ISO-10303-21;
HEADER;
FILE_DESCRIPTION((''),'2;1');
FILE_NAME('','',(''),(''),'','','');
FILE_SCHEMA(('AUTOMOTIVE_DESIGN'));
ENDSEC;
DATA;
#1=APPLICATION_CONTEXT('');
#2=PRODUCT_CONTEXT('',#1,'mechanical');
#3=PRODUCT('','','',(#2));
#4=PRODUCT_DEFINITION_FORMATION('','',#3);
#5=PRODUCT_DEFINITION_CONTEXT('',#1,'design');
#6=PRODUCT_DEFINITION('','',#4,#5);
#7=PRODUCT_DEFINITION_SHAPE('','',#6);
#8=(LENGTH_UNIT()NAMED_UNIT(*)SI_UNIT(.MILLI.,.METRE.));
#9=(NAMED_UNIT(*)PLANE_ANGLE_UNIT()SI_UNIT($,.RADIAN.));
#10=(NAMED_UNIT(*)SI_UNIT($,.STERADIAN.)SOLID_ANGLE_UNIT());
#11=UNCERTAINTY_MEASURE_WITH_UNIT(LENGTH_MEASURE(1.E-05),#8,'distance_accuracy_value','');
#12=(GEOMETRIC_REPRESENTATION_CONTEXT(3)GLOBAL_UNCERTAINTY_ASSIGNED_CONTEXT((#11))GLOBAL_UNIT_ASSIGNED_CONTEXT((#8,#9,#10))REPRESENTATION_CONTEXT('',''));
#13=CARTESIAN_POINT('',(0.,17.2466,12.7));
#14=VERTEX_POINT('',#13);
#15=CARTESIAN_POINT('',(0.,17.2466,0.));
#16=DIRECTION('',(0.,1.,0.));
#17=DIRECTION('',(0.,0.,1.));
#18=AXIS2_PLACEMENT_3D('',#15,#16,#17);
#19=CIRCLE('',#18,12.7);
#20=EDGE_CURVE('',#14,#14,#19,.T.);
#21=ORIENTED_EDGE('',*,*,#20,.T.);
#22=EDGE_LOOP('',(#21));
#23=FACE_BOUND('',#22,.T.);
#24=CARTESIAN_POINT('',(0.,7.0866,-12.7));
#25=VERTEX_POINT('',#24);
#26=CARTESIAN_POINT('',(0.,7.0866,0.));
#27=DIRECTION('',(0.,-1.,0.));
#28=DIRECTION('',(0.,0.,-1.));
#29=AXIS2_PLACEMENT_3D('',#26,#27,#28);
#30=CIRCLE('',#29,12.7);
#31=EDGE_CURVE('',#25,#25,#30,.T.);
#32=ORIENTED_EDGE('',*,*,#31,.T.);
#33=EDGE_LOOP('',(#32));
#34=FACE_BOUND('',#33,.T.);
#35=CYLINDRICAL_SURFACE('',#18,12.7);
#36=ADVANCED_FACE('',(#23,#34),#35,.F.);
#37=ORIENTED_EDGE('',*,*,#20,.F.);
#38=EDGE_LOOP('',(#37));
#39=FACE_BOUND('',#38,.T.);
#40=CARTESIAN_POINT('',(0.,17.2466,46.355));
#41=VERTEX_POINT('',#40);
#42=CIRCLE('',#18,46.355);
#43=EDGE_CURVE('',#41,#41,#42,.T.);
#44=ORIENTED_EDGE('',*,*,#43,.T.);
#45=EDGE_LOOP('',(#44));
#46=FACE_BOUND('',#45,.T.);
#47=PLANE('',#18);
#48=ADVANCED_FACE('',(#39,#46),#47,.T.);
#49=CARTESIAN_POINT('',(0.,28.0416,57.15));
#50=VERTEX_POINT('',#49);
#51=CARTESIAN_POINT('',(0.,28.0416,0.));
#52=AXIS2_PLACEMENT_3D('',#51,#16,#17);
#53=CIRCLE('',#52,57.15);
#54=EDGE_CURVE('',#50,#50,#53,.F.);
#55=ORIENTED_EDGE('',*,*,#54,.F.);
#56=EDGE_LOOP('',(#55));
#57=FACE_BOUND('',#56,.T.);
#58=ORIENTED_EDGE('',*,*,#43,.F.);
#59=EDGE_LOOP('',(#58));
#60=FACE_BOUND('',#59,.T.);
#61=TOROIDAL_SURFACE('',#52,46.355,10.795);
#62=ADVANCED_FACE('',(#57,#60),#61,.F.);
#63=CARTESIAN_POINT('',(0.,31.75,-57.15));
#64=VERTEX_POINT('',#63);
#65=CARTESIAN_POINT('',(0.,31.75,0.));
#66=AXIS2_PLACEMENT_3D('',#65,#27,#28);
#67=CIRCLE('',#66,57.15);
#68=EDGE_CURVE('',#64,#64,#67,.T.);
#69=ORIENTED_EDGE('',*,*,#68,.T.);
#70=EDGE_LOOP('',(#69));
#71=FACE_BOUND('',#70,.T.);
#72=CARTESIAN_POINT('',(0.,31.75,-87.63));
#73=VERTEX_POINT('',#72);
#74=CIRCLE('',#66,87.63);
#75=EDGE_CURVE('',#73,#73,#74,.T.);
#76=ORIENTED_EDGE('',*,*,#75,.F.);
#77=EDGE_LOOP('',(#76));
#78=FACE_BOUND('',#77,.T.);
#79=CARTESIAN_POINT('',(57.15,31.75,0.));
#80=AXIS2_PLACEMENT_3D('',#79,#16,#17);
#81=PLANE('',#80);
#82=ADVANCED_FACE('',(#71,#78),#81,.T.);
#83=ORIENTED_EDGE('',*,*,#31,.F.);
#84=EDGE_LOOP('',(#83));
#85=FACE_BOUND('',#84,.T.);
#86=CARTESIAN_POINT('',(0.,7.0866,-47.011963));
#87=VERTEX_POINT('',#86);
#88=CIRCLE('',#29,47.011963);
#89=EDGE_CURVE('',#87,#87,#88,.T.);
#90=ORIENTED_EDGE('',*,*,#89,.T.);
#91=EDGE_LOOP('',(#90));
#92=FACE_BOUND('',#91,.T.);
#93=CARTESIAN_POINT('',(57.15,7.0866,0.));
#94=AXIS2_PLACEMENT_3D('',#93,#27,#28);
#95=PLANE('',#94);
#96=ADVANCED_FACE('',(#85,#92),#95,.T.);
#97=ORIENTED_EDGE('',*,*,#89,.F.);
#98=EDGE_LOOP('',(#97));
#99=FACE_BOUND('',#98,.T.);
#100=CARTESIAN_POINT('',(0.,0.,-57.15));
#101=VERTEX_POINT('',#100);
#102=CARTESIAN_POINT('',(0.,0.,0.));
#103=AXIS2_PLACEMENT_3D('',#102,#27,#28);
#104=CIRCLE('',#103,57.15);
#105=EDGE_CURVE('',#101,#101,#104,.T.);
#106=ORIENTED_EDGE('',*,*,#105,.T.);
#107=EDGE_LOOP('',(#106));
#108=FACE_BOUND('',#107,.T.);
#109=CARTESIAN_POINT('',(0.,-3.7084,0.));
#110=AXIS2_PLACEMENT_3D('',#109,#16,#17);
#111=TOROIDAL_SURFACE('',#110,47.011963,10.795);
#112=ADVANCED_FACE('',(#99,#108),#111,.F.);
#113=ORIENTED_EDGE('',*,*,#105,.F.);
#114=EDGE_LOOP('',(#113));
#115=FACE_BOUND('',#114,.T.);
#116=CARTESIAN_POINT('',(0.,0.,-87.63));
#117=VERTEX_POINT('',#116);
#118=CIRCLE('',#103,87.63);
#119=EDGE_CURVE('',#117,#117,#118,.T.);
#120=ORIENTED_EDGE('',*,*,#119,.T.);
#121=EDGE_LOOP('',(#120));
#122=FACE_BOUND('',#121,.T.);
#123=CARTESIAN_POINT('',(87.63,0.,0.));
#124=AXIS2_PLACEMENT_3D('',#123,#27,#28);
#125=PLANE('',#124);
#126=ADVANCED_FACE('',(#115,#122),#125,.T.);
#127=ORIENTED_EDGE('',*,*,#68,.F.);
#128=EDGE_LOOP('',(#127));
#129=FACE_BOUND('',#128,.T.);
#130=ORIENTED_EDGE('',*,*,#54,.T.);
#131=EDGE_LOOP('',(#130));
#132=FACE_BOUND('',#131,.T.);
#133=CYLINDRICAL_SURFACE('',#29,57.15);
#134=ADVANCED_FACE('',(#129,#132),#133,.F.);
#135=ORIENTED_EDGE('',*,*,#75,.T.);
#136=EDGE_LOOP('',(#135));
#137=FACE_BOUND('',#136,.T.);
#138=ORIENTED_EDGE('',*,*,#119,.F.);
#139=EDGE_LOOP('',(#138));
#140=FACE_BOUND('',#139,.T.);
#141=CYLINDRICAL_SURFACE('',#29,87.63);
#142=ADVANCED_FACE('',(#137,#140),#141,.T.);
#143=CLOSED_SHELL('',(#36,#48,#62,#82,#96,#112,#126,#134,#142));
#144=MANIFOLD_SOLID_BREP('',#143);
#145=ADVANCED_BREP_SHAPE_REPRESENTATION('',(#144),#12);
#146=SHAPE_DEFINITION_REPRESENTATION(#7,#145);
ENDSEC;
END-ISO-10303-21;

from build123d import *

# Parameters (mm, degrees)
FILLET2_R              = 10.795
F_1_1_DIAMETER_HOLE1_D = 25.4


with BuildPart() as part:
    # Sketch1 → Revolve1 (revolve)
    with BuildSketch(Plane.XY, mode=Mode.PRIVATE) as revolve1_sk:
        Polygon((87.63, 0), (57.15, 0), (57.15, 7.0866), (0, 7.0866), (0, 17.2466), (57.15, 17.2466), (57.15, 31.75), (87.63, 31.75), align=None)
    revolve(revolve1_sk.sketch.rotate(Axis((0, 7.0866, 0), (0, 1, 0)), 90), axis=Axis((0, 7.0866, 0), (0, 1, 0)))

    # Fillet2
    # the kernel refuses this fillet: 10.795 mm, written as the material it adds along each edge
    with BuildSketch(Plane(origin=(0, 17.2466, 0), x_dir=(0, 0, -1), z_dir=(1, 0, 0))) as fillet2_piece_1:
        with BuildLine():
            CenterArc((57.15 - FILLET2_R, FILLET2_R), FILLET2_R, 270, 90)
            Line((57.15, FILLET2_R), (57.15 + FILLET2_R * 0.02, FILLET2_R))
            Line((57.15 + FILLET2_R * 0.02, FILLET2_R), (57.15 + FILLET2_R * 0.02, -FILLET2_R * 0.02))
            Line((57.15 + FILLET2_R * 0.02, -FILLET2_R * 0.02), (57.15 - FILLET2_R, -FILLET2_R * 0.02))
            Line((57.15 - FILLET2_R, -FILLET2_R * 0.02), (57.15 - FILLET2_R, 0))
        make_face()
    revolve(axis=Axis((0, 17.2466, 0), (0, 1, 0)))
    with BuildSketch(Plane(origin=(0, 7.0866, 0), x_dir=(0, 0, -1), z_dir=(1, 0, 0))) as fillet2_piece_2:
        with BuildLine():
            CenterArc((47.011962989, -10.795), FILLET2_R, 20.092051419, 69.907948581)
            Line((47.011962989, 0), (47.011962989, 0.2159))
            Line((47.011962989, 0.2159), (57.15, 0.2159))
            Line((57.15, 0.2159), (57.3659, 0))
            ThreePointArc((57.3659, 0), (57.3659, -3.5433), (57.35276074, -7.012432))
            Line((57.35276074, -7.012432), (57.15, -7.0866))
        make_face()
    revolve(axis=Axis((0, 7.0866, 0), (0, 1, 0)))

    # 1 (1) Diameter Hole1 (through all)
    with Locations(Plane(origin=(0, 17.2466, 0), x_dir=(1, 0, 0), z_dir=(0, 1, 0))):
        with Locations((0, 0)):
            Hole(F_1_1_DIAMETER_HOLE1_D / 2)


solid = part.part
